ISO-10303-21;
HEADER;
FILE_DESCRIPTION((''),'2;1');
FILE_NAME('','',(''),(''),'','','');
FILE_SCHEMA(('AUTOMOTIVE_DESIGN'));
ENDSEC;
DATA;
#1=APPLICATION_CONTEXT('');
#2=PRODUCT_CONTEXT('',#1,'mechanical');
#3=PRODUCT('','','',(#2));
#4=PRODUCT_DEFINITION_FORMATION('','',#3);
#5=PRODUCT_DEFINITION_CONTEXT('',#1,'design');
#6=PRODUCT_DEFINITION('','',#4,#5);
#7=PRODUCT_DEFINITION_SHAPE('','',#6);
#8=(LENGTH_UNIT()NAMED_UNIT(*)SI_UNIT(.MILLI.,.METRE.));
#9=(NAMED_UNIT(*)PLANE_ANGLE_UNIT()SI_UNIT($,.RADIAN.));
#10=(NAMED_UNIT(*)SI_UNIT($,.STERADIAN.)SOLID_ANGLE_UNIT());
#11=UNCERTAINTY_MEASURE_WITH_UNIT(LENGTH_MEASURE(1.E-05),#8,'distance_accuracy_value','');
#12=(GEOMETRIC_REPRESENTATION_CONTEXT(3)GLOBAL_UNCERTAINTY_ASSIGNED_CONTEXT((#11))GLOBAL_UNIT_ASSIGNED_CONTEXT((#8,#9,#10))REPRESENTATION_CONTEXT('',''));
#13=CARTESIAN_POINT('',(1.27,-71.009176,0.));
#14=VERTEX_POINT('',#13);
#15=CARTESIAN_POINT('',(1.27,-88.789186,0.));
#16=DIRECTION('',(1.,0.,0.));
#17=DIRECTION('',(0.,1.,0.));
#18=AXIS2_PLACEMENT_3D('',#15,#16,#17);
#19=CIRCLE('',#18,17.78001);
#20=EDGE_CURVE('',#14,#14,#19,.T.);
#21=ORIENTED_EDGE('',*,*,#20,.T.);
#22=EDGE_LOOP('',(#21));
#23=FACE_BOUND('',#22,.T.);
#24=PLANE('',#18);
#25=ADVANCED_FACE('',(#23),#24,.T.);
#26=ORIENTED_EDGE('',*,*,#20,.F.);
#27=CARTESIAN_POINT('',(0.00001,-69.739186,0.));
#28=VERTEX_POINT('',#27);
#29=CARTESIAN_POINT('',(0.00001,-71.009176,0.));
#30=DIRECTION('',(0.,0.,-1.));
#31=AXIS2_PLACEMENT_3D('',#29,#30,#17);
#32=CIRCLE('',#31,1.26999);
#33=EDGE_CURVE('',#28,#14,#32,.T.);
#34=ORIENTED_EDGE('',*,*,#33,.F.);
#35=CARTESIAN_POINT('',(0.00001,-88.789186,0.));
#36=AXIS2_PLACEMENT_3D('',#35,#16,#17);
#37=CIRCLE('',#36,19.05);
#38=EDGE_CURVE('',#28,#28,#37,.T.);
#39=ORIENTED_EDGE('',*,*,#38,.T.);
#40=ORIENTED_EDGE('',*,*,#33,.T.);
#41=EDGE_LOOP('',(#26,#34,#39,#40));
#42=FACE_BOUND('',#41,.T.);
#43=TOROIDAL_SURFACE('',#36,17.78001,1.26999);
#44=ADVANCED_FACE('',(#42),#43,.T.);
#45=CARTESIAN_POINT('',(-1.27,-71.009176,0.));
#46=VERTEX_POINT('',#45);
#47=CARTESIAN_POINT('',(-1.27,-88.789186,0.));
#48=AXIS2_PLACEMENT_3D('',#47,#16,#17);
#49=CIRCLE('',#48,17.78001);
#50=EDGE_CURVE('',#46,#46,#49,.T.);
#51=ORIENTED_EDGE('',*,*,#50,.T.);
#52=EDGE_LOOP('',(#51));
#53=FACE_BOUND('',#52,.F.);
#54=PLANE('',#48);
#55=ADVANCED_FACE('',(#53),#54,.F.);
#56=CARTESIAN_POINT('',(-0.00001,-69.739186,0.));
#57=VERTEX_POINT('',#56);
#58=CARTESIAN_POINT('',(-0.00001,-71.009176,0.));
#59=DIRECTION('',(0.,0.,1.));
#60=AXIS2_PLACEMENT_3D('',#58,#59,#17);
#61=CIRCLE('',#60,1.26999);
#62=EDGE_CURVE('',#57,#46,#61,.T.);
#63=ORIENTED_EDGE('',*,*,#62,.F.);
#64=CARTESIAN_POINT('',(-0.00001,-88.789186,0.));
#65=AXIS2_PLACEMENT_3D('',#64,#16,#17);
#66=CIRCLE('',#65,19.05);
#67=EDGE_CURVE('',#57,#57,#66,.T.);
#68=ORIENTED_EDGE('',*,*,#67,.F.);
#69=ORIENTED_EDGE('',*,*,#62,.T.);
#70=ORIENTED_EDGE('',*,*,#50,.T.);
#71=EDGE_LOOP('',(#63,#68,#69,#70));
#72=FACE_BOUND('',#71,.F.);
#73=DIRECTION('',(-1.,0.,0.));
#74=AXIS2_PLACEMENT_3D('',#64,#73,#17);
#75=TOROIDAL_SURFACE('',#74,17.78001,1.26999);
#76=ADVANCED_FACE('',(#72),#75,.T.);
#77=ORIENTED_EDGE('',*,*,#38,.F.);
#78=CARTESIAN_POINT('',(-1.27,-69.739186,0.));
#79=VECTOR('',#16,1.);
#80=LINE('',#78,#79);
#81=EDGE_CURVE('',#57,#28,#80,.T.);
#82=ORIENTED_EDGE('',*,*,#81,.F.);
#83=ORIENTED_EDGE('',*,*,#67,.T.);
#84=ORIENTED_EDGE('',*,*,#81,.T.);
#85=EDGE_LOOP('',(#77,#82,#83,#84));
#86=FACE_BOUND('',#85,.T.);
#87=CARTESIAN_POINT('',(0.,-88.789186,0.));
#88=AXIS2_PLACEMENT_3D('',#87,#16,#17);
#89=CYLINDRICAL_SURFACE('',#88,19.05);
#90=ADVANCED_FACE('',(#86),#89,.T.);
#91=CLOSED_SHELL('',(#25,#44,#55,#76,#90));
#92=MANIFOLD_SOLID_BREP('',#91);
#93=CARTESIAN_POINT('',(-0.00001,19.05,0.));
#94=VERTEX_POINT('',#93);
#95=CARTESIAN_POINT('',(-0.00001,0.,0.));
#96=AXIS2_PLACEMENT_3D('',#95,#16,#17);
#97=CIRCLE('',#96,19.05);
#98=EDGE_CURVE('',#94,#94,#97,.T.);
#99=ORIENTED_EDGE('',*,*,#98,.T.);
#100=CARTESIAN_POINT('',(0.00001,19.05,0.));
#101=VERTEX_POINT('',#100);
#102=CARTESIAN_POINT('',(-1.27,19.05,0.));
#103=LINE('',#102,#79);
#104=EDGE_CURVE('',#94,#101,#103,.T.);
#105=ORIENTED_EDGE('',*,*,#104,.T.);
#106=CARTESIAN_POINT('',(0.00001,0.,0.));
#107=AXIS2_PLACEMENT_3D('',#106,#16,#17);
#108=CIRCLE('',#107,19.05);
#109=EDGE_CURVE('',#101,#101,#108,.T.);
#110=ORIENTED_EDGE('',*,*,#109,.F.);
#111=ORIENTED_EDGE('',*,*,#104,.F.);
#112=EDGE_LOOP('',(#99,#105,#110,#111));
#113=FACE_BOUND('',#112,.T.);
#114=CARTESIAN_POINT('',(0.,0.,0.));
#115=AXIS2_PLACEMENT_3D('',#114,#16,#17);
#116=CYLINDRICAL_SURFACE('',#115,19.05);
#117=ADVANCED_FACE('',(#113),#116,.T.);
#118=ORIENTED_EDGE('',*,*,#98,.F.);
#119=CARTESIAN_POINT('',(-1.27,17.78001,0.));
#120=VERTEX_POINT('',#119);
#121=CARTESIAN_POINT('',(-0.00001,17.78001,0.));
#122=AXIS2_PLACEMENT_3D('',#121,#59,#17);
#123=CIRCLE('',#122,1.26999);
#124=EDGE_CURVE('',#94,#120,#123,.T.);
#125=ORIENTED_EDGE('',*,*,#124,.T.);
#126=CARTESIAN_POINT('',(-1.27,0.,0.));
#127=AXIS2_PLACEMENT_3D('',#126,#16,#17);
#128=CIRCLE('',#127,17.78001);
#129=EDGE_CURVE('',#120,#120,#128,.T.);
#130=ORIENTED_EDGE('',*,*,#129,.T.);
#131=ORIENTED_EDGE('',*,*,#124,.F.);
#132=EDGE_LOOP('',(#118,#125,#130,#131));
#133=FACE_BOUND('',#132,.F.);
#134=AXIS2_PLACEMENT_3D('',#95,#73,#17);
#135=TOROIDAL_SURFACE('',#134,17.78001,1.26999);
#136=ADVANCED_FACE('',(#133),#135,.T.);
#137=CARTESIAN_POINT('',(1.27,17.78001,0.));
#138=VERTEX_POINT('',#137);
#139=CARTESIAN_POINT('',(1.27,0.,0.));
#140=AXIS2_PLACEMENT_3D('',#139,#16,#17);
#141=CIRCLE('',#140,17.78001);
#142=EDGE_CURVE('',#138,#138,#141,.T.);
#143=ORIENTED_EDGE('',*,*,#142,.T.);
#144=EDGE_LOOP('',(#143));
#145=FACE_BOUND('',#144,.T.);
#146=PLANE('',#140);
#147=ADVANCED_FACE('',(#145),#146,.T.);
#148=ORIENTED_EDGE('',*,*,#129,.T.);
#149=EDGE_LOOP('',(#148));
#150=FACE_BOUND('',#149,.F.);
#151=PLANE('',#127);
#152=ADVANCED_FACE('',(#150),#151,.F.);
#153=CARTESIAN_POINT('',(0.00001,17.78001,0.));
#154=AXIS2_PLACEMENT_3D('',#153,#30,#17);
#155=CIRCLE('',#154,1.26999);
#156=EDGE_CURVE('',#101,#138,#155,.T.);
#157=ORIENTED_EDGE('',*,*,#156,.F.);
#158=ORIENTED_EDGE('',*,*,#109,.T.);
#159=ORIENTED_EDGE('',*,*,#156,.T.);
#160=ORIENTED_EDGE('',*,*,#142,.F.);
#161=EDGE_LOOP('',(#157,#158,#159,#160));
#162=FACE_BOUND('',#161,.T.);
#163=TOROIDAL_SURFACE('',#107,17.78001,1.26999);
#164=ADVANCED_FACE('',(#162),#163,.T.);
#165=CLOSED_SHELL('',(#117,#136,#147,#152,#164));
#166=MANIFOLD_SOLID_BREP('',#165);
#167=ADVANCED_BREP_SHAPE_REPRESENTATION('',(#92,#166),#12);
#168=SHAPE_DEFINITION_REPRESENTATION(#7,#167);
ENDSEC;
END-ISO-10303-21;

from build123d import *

# Parameters (mm, degrees)
F0_R     = 19.05
F1_DEPTH = 1.27
F2_R     = 1.26999
F2_2_R   = 1.26999


# Not quite as in the source:
# - a fillet or chamfer is up to 0.001 mm smaller than in the source, because OpenCascade refuses the exact size


with BuildPart() as f1:
    # F0 (on Right) → F1 (new body, symmetric)
    with BuildSketch(Plane.YZ):
        with Locations((-88.7891860319, 0)):
            Circle(F0_R)
    extrude(amount=F1_DEPTH, both=True)

    # F2#2 (radius 1.27 in the source; OpenCascade refuses exactly that, so slightly less here)
    f2_2_edges = [f1.edges().sort_by_distance(p)[0] for p in [
        (1.27, -107.839186, 0),
        (-1.27, -107.839186, 0),
    ]]
    fillet(f2_2_edges, radius=F2_2_R)


with BuildPart() as f1b:
    # F0 (on Right) → F1, piece 2 (new body, symmetric)
    with BuildSketch(Plane.YZ):
        Circle(F0_R)
    extrude(amount=F1_DEPTH, both=True)

    # F2 (radius 1.27 in the source; OpenCascade refuses exactly that, so slightly less here)
    f2_edges = [f1b.edges().sort_by_distance(p)[0] for p in [
        (1.27, -19.05, 0),
        (-1.27, -19.05, 0),
    ]]
    fillet(f2_edges, radius=F2_R)


solid = Compound([f1.part, f1b.part])
